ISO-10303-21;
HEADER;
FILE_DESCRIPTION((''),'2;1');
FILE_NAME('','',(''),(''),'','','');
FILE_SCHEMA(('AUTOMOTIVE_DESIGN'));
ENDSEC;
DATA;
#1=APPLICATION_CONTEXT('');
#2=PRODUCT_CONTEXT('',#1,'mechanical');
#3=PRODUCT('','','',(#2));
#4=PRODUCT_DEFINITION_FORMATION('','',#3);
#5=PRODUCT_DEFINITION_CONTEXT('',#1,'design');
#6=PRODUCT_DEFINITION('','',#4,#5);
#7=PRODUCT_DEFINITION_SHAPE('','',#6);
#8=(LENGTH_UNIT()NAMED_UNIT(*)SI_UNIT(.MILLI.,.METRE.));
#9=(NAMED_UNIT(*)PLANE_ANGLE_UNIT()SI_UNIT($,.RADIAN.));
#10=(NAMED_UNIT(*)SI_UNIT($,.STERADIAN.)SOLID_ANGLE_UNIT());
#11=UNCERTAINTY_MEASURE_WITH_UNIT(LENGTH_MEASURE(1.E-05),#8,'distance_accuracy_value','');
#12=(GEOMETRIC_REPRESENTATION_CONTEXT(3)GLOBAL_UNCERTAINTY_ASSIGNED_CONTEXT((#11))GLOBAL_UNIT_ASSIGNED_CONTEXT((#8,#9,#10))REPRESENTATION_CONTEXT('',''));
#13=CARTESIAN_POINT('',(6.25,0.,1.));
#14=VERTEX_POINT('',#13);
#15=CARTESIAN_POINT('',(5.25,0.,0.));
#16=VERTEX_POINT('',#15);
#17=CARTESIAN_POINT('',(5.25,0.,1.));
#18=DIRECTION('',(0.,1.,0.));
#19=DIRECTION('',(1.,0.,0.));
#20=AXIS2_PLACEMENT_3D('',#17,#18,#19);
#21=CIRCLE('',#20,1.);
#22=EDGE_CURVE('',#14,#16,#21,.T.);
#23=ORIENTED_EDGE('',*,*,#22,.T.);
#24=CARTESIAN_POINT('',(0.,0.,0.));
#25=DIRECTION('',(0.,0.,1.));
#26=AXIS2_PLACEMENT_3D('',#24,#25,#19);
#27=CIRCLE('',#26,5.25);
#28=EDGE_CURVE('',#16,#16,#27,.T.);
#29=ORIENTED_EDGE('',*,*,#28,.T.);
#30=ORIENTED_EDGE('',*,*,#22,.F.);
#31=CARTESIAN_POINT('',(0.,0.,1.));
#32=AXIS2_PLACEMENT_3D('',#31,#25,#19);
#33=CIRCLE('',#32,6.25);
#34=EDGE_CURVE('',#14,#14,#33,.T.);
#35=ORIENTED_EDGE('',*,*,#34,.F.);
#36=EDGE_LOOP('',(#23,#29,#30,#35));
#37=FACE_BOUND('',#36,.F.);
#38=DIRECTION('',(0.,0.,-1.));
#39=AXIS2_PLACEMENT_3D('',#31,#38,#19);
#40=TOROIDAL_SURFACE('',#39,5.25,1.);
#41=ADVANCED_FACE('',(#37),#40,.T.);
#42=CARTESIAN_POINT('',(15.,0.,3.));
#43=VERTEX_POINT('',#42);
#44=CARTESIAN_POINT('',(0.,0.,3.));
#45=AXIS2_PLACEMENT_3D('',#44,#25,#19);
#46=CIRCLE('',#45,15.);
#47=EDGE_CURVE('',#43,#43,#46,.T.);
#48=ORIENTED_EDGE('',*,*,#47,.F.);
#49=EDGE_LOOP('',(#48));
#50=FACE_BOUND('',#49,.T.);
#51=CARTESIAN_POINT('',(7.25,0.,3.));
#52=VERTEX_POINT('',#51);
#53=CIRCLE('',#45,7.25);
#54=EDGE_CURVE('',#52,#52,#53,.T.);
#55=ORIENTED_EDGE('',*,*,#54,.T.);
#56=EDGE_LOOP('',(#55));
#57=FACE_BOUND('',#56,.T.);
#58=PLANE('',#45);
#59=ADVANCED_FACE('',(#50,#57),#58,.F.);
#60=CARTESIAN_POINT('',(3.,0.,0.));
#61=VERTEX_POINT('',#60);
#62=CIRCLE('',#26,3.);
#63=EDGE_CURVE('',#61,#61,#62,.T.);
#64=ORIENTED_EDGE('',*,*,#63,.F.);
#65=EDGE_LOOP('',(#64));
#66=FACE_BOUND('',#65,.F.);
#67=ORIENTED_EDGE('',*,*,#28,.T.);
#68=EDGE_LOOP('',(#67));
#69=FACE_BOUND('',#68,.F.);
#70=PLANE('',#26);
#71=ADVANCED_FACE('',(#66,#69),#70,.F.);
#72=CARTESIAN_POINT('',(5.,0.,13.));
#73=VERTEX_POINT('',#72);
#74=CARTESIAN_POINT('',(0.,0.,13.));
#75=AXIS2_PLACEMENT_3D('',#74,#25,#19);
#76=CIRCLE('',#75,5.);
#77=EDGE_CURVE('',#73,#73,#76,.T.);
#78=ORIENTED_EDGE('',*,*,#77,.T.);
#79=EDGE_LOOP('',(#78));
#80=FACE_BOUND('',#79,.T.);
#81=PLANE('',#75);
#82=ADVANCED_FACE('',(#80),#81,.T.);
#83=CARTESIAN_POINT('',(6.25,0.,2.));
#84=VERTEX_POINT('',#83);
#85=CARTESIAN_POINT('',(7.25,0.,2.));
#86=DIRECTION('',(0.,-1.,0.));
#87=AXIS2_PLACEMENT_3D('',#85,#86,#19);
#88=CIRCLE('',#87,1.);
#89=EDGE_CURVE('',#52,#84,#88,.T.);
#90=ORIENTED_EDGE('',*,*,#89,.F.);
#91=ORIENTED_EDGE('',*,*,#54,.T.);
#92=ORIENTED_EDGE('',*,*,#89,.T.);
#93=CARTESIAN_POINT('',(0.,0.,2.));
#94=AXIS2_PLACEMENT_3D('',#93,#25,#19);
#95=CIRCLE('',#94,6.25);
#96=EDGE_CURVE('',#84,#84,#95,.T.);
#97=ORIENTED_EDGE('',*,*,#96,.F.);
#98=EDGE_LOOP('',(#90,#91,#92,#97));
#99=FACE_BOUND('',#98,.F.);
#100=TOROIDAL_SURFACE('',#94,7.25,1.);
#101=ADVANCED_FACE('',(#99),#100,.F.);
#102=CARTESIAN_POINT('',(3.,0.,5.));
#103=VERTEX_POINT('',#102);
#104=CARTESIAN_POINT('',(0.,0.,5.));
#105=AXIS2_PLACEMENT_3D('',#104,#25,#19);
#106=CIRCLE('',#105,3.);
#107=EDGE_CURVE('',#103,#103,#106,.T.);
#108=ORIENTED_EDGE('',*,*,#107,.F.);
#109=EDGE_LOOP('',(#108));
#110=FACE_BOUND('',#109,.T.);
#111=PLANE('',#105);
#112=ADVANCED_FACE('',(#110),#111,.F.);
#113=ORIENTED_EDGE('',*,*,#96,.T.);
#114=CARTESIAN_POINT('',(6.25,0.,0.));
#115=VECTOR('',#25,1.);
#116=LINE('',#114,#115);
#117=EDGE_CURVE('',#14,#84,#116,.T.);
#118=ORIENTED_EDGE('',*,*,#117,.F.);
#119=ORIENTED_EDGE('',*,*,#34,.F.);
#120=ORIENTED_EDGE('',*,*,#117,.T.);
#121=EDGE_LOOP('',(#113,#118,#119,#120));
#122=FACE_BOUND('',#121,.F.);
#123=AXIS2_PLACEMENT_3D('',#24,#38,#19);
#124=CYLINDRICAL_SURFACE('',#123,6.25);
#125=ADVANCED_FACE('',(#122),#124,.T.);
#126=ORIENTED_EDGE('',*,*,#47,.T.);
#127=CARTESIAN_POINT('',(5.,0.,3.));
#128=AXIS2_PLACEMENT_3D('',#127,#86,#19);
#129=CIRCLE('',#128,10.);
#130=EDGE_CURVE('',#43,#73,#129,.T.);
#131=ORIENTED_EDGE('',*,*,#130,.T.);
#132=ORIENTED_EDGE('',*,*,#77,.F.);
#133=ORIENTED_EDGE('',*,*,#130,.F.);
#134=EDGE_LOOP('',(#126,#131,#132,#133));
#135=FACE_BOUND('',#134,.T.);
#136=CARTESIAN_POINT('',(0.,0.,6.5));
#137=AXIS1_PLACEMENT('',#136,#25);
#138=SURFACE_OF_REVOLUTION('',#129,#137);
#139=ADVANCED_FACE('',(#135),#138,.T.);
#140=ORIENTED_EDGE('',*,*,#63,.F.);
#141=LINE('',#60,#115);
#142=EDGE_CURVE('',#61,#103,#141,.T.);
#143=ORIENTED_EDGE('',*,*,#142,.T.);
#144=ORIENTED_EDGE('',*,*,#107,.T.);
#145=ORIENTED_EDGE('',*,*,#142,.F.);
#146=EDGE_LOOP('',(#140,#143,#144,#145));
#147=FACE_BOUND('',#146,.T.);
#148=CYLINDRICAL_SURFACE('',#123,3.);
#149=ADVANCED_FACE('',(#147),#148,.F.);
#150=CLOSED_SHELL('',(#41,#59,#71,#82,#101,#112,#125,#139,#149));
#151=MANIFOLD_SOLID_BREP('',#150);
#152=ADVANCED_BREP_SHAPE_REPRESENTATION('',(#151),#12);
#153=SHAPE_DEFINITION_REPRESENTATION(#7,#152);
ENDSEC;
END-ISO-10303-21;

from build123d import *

# Parameters (mm, degrees)
F0_R     = 6.25
F0_R_2   = 3
F1_DEPTH = 3
F4_R     = 1
F5_DEPTH = 2


# Not quite as in the source:
# - a feature names something its author has since deleted; it is built from what else it names


with BuildPart() as f1:
    # F0 (on Top) → F1 (new body)
    with BuildSketch(Plane.XY):
        Circle(F0_R)
        Circle(F0_R_2, mode=Mode.SUBTRACT)
    extrude(amount=F1_DEPTH)

    # F2 (on Front) → F3 (revolve)
    with BuildSketch(Plane.XZ):
        with BuildLine():
            Line((5, 13), (0, 13))
            Line((0, 13), (0, 3))
            Line((0, 3), (15, 3))
            ThreePointArc((15, 3), (12.0710678119, 10.0710678119), (5, 13))
        make_face()
    revolve(axis=Axis((0, 0, 6.5), (0, 0, 1)))

    # F4
    f4_edges = [f1.edges().sort_by_distance(p)[0] for p in [
        (-6.25, 0, 0),
        (-6.25, 0, 3),
    ]]
    fillet(f4_edges, radius=F4_R)

    # F5 (cut): a face of the model
    f5_faces = [f1.faces().sort_by_distance(p)[0] for p in [
        (0, 0, 3),
    ]]
    extrude(f5_faces, amount=-F5_DEPTH, mode=Mode.SUBTRACT)


solid = f1.part
